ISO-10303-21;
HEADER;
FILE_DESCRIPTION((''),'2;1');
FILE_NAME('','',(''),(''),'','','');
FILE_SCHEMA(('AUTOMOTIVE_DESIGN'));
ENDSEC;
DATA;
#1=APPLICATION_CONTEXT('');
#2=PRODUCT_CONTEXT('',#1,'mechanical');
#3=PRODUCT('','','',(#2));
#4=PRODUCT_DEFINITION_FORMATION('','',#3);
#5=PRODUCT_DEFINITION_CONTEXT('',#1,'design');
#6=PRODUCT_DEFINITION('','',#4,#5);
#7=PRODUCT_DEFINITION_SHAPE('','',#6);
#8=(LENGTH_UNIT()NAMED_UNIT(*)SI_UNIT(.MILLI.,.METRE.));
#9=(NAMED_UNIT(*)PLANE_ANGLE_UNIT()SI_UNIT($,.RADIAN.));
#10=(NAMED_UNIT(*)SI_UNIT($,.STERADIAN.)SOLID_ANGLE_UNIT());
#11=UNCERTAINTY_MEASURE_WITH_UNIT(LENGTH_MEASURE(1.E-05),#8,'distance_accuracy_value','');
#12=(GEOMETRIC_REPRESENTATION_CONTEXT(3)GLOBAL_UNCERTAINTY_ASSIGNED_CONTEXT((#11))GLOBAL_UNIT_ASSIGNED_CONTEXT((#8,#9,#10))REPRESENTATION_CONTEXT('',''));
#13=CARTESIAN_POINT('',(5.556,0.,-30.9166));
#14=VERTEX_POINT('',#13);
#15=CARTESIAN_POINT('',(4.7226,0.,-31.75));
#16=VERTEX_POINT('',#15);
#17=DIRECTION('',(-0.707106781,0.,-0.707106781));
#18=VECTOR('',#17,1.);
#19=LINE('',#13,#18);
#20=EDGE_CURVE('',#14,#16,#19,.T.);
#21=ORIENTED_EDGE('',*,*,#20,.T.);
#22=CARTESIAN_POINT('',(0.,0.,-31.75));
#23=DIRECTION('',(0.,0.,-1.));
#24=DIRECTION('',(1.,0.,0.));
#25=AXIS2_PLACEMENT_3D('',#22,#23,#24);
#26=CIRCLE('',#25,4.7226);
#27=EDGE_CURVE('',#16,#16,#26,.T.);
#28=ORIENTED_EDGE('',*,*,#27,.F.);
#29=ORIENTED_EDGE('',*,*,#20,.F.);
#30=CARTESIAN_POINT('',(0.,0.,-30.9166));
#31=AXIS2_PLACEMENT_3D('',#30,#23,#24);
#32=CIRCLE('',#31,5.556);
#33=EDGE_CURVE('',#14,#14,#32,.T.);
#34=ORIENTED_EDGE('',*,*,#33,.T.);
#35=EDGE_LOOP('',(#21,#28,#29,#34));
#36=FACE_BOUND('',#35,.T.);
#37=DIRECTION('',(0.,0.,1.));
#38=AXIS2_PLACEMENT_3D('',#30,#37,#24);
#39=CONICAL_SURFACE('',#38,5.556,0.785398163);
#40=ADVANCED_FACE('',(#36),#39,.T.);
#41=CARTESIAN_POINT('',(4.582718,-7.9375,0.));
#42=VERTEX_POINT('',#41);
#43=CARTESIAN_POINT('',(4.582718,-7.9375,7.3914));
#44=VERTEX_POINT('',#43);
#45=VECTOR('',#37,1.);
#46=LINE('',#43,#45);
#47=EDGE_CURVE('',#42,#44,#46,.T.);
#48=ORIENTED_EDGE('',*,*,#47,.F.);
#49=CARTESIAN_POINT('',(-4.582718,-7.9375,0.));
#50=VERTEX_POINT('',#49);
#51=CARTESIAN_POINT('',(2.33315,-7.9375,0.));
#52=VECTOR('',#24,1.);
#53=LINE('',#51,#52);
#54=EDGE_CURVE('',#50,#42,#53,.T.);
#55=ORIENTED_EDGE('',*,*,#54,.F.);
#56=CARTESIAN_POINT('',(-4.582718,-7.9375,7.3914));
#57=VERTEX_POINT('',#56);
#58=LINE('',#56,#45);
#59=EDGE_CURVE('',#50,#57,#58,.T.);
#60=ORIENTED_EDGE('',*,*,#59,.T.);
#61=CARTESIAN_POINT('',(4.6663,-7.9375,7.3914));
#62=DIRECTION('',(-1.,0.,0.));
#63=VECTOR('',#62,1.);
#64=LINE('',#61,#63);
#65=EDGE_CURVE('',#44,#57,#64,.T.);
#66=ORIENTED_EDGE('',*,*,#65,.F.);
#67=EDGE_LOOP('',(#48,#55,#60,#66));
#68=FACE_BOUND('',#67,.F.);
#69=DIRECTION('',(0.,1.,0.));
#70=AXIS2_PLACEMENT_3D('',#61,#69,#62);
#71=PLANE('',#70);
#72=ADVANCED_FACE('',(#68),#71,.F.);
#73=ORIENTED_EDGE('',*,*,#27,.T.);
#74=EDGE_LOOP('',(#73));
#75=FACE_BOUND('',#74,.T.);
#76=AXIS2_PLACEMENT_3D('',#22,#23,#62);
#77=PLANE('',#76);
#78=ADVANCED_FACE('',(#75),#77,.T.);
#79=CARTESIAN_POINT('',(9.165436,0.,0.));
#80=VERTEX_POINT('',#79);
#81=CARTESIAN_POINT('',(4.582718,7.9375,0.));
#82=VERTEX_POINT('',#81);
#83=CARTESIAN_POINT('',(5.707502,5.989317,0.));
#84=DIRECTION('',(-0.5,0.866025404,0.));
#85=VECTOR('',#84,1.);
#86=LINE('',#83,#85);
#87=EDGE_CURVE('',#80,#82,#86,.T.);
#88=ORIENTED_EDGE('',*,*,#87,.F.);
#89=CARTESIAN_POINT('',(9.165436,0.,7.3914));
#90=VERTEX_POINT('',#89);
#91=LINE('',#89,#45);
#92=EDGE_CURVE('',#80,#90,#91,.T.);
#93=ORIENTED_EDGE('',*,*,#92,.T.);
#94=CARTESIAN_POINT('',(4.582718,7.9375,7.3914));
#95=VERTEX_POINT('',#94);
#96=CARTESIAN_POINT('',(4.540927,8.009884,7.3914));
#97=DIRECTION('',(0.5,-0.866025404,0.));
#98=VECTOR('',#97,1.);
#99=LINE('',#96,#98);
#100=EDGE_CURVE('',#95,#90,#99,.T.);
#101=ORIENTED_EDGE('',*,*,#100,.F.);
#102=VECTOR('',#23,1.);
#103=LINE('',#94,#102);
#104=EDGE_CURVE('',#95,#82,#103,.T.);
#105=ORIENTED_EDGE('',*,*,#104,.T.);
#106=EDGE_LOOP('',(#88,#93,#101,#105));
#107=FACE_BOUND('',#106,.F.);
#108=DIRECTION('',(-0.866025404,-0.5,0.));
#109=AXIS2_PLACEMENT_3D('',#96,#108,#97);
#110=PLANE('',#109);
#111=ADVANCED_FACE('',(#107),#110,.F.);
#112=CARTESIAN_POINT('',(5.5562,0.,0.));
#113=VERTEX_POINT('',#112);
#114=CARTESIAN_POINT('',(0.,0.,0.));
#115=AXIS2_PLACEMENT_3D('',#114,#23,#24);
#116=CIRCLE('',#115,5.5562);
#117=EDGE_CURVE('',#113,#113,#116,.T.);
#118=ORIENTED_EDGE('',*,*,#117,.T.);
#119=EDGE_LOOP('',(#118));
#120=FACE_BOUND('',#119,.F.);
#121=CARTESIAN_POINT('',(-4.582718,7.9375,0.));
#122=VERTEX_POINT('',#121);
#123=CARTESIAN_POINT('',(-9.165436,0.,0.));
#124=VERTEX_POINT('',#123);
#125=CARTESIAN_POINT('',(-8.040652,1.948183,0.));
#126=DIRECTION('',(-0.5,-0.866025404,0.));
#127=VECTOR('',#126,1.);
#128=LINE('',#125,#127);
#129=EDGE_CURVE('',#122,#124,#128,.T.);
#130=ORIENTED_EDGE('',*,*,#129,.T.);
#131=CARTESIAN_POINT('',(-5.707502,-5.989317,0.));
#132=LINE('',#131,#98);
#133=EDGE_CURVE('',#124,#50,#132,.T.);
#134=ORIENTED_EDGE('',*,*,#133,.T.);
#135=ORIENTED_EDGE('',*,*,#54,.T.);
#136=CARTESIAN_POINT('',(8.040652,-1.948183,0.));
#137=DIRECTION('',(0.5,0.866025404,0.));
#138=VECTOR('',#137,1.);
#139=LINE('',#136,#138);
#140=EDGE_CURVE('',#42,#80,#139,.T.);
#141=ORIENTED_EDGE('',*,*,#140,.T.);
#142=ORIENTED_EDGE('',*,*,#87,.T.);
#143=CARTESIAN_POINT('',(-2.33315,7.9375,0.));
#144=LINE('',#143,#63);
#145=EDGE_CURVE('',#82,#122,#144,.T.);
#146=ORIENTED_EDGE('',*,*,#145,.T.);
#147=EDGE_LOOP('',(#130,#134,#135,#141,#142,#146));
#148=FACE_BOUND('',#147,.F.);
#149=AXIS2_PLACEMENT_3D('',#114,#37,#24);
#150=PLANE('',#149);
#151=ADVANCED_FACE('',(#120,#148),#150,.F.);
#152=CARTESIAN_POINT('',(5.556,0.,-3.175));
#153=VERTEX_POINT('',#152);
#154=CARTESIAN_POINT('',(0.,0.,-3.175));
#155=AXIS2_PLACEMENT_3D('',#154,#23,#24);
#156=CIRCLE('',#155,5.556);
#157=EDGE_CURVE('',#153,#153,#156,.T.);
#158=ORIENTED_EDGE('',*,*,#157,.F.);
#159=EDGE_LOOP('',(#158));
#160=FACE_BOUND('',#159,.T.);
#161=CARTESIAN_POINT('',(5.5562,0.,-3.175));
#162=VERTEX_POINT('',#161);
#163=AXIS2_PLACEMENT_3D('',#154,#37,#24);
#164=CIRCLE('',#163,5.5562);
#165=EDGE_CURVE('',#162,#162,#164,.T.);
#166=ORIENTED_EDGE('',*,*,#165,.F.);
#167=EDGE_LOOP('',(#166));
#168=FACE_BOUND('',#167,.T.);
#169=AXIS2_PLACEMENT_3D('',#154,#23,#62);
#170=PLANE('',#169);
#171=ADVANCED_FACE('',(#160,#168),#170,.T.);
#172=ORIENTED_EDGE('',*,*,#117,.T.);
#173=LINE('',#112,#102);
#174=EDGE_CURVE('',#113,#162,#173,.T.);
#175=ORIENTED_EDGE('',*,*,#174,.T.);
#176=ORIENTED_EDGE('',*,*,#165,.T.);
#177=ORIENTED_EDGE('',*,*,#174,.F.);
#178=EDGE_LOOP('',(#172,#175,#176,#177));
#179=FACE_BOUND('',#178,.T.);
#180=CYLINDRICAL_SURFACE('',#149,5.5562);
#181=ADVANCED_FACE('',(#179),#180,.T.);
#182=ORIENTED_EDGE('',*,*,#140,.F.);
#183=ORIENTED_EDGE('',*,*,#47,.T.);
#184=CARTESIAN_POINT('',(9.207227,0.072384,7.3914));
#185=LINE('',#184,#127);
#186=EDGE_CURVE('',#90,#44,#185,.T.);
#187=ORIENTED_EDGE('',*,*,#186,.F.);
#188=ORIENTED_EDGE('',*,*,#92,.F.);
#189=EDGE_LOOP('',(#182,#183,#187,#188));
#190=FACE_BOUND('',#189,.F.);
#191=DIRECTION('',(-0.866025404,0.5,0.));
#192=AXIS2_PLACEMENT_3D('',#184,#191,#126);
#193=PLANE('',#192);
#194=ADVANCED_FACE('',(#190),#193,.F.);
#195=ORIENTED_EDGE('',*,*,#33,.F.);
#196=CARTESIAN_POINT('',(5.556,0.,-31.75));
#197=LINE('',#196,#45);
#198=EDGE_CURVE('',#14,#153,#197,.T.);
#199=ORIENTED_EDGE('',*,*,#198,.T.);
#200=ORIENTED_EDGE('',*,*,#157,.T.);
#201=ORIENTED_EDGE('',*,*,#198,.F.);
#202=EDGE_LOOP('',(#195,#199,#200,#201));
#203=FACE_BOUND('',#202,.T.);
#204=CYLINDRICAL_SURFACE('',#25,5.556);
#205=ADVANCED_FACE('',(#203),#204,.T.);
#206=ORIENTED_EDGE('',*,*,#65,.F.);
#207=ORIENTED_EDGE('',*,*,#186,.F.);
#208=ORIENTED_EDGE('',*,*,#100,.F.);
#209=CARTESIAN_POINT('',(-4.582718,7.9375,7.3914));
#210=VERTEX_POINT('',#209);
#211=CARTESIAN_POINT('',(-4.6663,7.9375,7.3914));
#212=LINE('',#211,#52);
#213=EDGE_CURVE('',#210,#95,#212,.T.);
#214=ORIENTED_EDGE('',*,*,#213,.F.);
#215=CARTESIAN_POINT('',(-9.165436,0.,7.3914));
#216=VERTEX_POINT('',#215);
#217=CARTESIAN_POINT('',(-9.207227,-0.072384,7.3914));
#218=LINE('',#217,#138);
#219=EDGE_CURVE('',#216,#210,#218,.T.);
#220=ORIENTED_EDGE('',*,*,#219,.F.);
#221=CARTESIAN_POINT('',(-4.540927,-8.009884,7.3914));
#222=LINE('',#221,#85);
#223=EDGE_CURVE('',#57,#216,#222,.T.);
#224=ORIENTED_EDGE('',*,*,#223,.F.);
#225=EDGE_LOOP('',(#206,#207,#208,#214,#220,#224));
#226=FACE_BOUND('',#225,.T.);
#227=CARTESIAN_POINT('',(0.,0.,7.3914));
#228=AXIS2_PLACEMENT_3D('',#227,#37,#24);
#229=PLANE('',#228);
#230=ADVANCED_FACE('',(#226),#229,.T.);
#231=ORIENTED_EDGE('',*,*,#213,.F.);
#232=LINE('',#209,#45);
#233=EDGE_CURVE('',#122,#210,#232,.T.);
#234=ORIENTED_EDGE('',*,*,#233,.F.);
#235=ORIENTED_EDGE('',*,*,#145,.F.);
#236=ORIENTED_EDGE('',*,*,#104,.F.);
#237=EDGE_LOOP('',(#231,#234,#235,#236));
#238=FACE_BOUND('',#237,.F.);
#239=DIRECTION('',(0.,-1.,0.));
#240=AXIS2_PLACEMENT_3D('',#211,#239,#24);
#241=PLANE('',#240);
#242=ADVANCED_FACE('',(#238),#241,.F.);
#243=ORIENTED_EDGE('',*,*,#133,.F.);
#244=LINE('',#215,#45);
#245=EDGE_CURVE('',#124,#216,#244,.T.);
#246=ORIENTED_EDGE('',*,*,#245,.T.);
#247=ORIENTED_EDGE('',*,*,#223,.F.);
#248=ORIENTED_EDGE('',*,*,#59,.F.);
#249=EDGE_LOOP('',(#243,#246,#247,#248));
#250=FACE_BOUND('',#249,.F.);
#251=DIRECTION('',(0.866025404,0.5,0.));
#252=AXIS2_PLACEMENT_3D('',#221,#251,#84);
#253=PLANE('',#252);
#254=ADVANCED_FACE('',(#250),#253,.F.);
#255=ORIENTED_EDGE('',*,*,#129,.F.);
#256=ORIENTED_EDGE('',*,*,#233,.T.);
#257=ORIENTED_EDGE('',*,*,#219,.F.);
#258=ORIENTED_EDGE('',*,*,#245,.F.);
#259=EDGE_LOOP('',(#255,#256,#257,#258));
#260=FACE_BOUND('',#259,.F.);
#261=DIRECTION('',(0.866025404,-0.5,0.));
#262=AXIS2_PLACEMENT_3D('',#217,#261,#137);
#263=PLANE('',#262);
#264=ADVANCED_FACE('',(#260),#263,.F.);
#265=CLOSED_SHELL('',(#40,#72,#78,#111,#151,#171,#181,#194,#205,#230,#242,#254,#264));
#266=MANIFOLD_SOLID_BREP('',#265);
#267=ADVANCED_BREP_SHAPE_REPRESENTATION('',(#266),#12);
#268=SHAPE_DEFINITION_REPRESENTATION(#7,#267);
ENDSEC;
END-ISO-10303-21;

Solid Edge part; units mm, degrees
sketch "Sketch1" plane through (0, 0, 0) normal (0, 0, 1) x (1, 0, 0)
  circle A0 centre (0, 0) radius 9.2075
  dimension "D1" = 18.415
extrude "Protrusion1" add sketch "Sketch1" along normal blind 7.3914
sketch "Sketch2" plane through (0, 0, 0) normal (0, 0, -1) x (1, 0, 0)
  circle A0 centre (0, 0) radius 5.5562
extrude "Protrusion2" add sketch "Sketch2" along normal blind 31.75
sketch "Sketch3" plane through (0, 0, -31.75) normal (0, 0, -1) x (1, 0, 0)
  circle A0 centre (0, 0) radius 5.556
extrude "Cutout1" cut sketch "Sketch3" against normal blind 28.575 flip side to cut
chamfer "Chamfer_1" distance 0.8334 angle 45 1 edges at (-5.556, 0, -31.75)
sketch "Sketch4" plane through (0, 0, 7.3914) normal (0, 0, 1) x (1, 0, 0)
  line L0 (-4.6663, 7.9375) -> (4.6663, 7.9375)
  dimension "D1" = 15.875
extrude "Cutout2" cut sketch "Sketch4" against normal up to next material side at (0, 7.9875, 7.3914)
pattern_circular "Pattern1" count 6 over 360 about axis through (0, 0, 7.3914) along (0, 0, 1) of "Cutout2"
properties part number "24100091"
